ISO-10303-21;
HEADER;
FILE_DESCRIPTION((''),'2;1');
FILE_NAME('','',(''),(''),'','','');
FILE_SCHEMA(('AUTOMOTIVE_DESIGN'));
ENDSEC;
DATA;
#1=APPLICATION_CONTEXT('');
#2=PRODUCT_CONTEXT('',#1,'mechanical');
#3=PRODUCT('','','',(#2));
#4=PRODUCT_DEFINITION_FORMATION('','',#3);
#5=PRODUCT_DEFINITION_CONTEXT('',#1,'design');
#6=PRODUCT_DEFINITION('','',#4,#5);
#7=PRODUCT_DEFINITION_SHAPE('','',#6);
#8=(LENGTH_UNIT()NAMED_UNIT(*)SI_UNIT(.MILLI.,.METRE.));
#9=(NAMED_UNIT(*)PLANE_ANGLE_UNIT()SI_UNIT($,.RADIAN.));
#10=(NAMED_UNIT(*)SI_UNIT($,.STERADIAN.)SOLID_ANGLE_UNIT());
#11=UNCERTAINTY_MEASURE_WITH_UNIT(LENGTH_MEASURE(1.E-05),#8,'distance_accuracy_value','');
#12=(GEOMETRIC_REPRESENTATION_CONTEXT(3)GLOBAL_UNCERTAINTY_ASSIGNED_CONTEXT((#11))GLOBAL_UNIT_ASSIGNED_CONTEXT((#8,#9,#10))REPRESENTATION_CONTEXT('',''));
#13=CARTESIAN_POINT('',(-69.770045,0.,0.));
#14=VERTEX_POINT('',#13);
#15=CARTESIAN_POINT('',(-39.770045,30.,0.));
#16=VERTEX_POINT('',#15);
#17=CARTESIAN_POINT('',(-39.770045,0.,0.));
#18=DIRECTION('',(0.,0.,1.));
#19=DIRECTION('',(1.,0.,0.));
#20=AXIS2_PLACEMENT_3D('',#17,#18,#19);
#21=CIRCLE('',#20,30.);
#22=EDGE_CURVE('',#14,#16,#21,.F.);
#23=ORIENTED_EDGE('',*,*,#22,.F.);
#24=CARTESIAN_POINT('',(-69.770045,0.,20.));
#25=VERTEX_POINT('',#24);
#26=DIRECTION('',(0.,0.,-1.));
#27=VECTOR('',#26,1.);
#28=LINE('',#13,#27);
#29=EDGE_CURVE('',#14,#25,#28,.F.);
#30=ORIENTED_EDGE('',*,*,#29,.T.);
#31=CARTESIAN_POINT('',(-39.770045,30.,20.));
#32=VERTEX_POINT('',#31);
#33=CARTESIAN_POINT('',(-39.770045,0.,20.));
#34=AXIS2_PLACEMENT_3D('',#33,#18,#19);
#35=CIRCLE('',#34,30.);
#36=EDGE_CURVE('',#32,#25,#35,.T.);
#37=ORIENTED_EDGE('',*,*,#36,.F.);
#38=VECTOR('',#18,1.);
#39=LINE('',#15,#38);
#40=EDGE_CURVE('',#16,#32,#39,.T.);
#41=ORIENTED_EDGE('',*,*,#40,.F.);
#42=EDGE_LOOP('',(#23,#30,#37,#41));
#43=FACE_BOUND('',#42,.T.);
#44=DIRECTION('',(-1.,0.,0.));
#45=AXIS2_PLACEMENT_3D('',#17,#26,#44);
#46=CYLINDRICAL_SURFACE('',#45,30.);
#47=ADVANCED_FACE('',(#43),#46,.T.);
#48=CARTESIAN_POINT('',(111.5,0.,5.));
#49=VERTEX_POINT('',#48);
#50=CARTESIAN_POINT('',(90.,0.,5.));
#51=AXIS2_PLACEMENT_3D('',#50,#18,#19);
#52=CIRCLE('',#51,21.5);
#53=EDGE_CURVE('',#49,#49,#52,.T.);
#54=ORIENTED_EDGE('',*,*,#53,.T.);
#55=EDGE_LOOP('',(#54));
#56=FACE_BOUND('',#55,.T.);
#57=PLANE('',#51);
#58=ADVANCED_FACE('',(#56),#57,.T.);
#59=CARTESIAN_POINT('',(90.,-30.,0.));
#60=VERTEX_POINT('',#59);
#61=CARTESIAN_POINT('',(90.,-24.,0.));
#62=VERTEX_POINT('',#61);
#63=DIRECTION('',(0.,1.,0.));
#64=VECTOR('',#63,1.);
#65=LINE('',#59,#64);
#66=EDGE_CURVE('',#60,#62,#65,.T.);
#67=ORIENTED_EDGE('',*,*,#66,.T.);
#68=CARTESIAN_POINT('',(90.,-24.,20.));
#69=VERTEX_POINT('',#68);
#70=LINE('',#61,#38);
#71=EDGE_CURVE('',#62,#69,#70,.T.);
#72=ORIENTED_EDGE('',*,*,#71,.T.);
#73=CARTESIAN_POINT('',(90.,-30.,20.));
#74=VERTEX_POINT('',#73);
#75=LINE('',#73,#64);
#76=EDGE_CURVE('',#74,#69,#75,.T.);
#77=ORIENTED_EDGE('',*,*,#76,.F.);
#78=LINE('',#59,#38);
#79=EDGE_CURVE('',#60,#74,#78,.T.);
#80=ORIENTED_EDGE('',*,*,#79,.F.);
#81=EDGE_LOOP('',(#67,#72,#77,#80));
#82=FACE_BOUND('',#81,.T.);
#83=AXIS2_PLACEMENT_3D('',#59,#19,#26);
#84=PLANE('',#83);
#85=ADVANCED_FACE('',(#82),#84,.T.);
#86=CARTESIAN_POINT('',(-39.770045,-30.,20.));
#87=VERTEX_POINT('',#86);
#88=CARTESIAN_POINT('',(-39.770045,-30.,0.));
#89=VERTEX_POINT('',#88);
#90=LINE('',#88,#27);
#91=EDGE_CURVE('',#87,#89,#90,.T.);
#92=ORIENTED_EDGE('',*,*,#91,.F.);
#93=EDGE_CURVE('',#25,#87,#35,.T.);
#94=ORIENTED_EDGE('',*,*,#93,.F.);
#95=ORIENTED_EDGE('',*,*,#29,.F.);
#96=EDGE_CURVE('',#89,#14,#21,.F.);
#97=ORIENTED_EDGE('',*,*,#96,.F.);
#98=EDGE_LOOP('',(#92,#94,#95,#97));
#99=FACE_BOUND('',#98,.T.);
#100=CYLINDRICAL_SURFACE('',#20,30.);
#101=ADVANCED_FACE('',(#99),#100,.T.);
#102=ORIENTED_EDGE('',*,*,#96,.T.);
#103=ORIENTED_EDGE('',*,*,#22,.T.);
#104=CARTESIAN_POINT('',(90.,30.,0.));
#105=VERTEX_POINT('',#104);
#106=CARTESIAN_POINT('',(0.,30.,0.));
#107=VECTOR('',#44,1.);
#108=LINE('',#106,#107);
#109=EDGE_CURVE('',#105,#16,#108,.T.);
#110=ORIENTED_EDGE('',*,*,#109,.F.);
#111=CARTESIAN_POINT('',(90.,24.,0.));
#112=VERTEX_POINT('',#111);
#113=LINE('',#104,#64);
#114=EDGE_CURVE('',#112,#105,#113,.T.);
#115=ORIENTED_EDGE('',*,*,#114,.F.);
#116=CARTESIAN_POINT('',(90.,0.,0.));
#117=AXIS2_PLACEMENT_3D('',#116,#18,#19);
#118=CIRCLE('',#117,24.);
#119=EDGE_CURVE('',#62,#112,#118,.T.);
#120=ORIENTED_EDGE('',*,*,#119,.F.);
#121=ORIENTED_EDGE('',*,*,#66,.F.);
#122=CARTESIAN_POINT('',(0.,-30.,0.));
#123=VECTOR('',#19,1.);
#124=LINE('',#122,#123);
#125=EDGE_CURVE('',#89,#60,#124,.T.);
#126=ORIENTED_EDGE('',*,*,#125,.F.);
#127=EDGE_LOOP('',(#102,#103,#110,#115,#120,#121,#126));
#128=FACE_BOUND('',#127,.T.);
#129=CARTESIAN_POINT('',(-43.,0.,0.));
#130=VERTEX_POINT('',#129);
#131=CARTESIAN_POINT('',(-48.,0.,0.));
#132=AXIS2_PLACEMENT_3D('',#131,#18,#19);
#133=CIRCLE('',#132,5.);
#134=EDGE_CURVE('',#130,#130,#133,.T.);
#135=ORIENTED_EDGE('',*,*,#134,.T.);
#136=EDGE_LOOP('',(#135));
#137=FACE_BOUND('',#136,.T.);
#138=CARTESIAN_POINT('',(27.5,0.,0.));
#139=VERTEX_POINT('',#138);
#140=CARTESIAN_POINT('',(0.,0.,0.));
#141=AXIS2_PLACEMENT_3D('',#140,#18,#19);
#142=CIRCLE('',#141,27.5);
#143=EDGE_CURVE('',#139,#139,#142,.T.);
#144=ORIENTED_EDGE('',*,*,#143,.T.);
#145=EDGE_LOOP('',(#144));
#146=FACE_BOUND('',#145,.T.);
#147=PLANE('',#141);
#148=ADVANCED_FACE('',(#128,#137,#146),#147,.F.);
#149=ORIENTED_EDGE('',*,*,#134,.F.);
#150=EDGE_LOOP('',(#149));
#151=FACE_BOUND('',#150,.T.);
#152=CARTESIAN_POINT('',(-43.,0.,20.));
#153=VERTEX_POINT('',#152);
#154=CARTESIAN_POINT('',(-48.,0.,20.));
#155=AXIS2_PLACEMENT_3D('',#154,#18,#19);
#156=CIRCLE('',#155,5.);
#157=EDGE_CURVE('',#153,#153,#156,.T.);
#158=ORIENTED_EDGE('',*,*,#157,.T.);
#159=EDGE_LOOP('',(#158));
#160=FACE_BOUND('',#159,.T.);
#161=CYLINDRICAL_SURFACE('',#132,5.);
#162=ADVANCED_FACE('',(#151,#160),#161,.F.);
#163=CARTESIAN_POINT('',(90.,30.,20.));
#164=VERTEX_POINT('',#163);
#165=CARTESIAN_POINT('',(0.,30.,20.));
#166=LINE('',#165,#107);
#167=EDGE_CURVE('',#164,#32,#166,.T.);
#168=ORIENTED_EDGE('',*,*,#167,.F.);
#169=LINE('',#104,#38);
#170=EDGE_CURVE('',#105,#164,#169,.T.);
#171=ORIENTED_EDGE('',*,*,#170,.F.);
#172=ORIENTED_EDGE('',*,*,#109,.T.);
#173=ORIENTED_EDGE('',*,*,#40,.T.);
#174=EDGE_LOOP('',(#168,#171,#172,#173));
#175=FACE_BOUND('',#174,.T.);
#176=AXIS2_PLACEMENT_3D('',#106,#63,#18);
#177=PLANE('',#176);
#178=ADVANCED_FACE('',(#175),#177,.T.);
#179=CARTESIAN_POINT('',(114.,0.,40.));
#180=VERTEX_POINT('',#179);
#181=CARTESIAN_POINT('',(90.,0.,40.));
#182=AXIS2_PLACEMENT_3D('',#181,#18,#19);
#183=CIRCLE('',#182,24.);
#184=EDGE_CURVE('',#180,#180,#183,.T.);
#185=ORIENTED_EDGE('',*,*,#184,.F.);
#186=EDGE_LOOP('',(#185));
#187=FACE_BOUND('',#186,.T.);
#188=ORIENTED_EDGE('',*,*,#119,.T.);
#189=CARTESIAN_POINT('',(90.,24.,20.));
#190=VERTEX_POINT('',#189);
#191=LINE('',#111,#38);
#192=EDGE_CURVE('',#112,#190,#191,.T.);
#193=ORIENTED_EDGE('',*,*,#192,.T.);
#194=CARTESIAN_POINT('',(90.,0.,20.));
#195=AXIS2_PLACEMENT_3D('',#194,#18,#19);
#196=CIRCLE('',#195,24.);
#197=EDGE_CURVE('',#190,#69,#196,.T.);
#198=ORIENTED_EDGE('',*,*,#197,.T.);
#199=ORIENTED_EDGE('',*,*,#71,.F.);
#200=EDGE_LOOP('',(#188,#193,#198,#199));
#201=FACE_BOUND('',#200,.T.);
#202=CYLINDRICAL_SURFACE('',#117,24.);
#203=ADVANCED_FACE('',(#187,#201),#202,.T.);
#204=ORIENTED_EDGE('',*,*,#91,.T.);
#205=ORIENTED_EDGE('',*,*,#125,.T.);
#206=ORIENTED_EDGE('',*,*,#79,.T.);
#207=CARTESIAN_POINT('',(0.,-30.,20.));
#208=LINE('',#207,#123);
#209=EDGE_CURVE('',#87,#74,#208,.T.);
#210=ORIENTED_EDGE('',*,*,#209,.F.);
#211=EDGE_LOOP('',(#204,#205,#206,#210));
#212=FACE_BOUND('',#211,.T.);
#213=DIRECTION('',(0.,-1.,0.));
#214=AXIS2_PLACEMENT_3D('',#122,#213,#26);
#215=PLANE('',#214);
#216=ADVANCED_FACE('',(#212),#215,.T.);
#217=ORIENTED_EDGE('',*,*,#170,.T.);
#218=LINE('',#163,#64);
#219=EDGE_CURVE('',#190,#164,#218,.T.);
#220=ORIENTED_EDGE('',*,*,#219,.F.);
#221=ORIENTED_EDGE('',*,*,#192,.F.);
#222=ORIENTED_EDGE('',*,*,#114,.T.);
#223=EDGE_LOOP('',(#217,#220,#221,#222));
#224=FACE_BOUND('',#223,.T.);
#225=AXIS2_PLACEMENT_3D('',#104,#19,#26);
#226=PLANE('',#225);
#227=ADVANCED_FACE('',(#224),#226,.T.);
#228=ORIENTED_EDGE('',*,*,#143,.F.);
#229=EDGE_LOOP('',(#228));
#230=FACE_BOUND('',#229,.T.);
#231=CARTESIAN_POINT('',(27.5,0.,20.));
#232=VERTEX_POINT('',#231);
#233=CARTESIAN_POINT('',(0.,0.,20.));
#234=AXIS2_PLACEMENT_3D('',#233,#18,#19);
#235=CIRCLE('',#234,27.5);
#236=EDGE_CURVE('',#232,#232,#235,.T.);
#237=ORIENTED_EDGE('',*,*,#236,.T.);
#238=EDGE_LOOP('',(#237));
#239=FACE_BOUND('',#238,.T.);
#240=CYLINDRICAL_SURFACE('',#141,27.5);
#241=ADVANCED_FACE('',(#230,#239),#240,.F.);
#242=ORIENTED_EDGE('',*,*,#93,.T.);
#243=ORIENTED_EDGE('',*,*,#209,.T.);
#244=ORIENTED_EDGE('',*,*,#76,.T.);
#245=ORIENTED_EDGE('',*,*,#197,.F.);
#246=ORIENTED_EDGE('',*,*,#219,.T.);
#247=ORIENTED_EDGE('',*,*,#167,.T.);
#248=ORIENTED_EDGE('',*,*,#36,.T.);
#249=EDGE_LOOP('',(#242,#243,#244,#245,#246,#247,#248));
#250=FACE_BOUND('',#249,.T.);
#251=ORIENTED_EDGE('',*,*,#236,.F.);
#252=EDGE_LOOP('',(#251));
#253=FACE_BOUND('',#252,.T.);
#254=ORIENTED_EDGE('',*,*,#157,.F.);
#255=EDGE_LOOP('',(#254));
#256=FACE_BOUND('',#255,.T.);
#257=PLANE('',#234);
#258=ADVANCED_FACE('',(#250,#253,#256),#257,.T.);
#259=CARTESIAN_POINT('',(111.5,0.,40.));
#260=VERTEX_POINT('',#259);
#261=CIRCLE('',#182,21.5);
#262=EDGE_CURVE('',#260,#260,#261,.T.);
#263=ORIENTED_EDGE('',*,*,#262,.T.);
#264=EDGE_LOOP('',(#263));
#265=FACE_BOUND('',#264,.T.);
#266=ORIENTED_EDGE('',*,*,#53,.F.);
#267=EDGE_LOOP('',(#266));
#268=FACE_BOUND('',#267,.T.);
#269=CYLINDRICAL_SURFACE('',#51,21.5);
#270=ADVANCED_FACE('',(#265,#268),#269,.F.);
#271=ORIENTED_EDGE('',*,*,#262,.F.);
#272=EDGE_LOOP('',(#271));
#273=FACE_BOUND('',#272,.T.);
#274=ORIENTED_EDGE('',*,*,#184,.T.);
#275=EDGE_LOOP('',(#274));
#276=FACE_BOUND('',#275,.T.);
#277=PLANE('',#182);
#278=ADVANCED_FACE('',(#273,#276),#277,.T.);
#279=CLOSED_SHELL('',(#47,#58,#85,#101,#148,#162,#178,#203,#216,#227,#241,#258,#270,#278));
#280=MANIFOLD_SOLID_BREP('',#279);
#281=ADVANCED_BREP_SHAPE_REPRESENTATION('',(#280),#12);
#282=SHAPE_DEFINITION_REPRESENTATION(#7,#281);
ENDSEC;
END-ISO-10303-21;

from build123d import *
from build123d.topology import SkipClean

# Parameters (mm, degrees)
SKETCH1_R           = 30
BOSS_EXTRUDE1_DEPTH = 20
SKETCH2_R           = 27.5
CUT_EXTRUDE1_DEPTH  = 47.904157598
BOSS_EXTRUDE2_START = -20
BOSS_EXTRUDE2_DEPTH = 20
SKETCH6_R           = 21.5
CUT_EXTRUDE2_DEPTH  = 35
SKETCH11_R          = 24
BOSS_EXTRUDE3_DEPTH = 20
BOSS_EXTRUDE4_START = -40
SKETCH12_R          = 24
BOSS_EXTRUDE4_DEPTH = 40
SKETCH13_R          = 21.5
CUT_EXTRUDE6_DEPTH  = 35
BOSS_EXTRUDE6_START = -20
BOSS_EXTRUDE6_DEPTH = 20
SKETCH15_R          = 5
CUT_EXTRUDE8_DEPTH  = 20
FILLET1_R           = 30
FILLET2_R           = 30


with BuildPart() as part:
    # Sketch1 → Boss-Extrude1 (new body)
    with BuildSketch(Plane.XY):
        Circle(SKETCH1_R)
    extrude(amount=BOSS_EXTRUDE1_DEPTH)

    # Sketch2 → Cut-Extrude1 (cut, through all)
    with BuildSketch(Plane.XY.offset(20)):
        Circle(SKETCH2_R)
    extrude(amount=-CUT_EXTRUDE1_DEPTH, mode=Mode.SUBTRACT)

    # Sketch4 → Boss-Extrude2 (add)
    with BuildSketch(Plane.XY.offset(20).offset(BOSS_EXTRUDE2_START)):
        with BuildLine():
            Line((0, 30), (90, 30))
            Line((90, 30), (90, 24))
            ThreePointArc((90, 24), (114, 0), (90, -24))
            Line((90, -24), (90, -30))
            Line((90, -30), (0, -30))
            ThreePointArc((0, -30), (30, 0), (0, 30))
        make_face()
    extrude(amount=BOSS_EXTRUDE2_DEPTH)

    # Sketch6 → Cut-Extrude2 (cut)
    with BuildSketch(Plane.XY.offset(20)):
        with Locations((90, 0)):
            Circle(SKETCH6_R)
    extrude(amount=-CUT_EXTRUDE2_DEPTH, mode=Mode.SUBTRACT)

    # Sketch11 → Boss-Extrude3 (add)
    with SkipClean():  # the faces are left unmerged after this step: merging them gives an invalid solid
        with BuildSketch(Plane.XY.offset(20)):
            with Locations((90, 0)):
                Circle(SKETCH11_R)
        extrude(amount=BOSS_EXTRUDE3_DEPTH)
    add(part.part.scale(1), mode=Mode.REPLACE)  # the faces are merged on a copy

    # Sketch12 → Boss-Extrude4 (add)
    with SkipClean():  # the faces are left unmerged after this step: merging them gives an invalid solid
        with BuildSketch(Plane.XY.offset(40).offset(BOSS_EXTRUDE4_START)):
            with Locations((90, 0)):
                Circle(SKETCH12_R)
        extrude(amount=BOSS_EXTRUDE4_DEPTH)

    # Sketch13 → Cut-Extrude6 (cut)
    with SkipClean():  # the faces are left unmerged after this step: merging them gives an invalid solid
        with BuildSketch(Plane.XY.offset(40)):
            with Locations((90, 0)):
                Circle(SKETCH13_R)
        extrude(amount=-CUT_EXTRUDE6_DEPTH, mode=Mode.SUBTRACT)

    # Sketch14 → Boss-Extrude6 (add)
    with BuildSketch(Plane.XY.offset(20).offset(BOSS_EXTRUDE6_START)):
        with BuildLine():
            ThreePointArc((0, 30), (-30, 0), (0, -30))
            Line((0, -30), (-69.770044623, -30))
            Line((-69.770044623, -30), (-69.770044623, 30))
            Line((-69.770044623, 30), (0, 30))
        make_face()
    extrude(amount=BOSS_EXTRUDE6_DEPTH)

    # Sketch15 → Cut-Extrude8 (cut)
    with BuildSketch(Plane.XY.offset(20)):
        with Locations((-48, 0)):
            Circle(SKETCH15_R)
    extrude(amount=-CUT_EXTRUDE8_DEPTH, mode=Mode.SUBTRACT)

    # Fillet1
    fillet1_edges = [part.edges().sort_by_distance(p)[0] for p in [
        (-69.770044623, -30, 10),
    ]]
    fillet(fillet1_edges, radius=FILLET1_R)

    # Fillet2
    fillet2_edges = [part.edges().sort_by_distance(p)[0] for p in [
        (-69.770044623, 30, 10),
    ]]
    fillet(fillet2_edges, radius=FILLET2_R - 0.0001)  # a hair under: the kernel refuses the full size


solid = part.part
